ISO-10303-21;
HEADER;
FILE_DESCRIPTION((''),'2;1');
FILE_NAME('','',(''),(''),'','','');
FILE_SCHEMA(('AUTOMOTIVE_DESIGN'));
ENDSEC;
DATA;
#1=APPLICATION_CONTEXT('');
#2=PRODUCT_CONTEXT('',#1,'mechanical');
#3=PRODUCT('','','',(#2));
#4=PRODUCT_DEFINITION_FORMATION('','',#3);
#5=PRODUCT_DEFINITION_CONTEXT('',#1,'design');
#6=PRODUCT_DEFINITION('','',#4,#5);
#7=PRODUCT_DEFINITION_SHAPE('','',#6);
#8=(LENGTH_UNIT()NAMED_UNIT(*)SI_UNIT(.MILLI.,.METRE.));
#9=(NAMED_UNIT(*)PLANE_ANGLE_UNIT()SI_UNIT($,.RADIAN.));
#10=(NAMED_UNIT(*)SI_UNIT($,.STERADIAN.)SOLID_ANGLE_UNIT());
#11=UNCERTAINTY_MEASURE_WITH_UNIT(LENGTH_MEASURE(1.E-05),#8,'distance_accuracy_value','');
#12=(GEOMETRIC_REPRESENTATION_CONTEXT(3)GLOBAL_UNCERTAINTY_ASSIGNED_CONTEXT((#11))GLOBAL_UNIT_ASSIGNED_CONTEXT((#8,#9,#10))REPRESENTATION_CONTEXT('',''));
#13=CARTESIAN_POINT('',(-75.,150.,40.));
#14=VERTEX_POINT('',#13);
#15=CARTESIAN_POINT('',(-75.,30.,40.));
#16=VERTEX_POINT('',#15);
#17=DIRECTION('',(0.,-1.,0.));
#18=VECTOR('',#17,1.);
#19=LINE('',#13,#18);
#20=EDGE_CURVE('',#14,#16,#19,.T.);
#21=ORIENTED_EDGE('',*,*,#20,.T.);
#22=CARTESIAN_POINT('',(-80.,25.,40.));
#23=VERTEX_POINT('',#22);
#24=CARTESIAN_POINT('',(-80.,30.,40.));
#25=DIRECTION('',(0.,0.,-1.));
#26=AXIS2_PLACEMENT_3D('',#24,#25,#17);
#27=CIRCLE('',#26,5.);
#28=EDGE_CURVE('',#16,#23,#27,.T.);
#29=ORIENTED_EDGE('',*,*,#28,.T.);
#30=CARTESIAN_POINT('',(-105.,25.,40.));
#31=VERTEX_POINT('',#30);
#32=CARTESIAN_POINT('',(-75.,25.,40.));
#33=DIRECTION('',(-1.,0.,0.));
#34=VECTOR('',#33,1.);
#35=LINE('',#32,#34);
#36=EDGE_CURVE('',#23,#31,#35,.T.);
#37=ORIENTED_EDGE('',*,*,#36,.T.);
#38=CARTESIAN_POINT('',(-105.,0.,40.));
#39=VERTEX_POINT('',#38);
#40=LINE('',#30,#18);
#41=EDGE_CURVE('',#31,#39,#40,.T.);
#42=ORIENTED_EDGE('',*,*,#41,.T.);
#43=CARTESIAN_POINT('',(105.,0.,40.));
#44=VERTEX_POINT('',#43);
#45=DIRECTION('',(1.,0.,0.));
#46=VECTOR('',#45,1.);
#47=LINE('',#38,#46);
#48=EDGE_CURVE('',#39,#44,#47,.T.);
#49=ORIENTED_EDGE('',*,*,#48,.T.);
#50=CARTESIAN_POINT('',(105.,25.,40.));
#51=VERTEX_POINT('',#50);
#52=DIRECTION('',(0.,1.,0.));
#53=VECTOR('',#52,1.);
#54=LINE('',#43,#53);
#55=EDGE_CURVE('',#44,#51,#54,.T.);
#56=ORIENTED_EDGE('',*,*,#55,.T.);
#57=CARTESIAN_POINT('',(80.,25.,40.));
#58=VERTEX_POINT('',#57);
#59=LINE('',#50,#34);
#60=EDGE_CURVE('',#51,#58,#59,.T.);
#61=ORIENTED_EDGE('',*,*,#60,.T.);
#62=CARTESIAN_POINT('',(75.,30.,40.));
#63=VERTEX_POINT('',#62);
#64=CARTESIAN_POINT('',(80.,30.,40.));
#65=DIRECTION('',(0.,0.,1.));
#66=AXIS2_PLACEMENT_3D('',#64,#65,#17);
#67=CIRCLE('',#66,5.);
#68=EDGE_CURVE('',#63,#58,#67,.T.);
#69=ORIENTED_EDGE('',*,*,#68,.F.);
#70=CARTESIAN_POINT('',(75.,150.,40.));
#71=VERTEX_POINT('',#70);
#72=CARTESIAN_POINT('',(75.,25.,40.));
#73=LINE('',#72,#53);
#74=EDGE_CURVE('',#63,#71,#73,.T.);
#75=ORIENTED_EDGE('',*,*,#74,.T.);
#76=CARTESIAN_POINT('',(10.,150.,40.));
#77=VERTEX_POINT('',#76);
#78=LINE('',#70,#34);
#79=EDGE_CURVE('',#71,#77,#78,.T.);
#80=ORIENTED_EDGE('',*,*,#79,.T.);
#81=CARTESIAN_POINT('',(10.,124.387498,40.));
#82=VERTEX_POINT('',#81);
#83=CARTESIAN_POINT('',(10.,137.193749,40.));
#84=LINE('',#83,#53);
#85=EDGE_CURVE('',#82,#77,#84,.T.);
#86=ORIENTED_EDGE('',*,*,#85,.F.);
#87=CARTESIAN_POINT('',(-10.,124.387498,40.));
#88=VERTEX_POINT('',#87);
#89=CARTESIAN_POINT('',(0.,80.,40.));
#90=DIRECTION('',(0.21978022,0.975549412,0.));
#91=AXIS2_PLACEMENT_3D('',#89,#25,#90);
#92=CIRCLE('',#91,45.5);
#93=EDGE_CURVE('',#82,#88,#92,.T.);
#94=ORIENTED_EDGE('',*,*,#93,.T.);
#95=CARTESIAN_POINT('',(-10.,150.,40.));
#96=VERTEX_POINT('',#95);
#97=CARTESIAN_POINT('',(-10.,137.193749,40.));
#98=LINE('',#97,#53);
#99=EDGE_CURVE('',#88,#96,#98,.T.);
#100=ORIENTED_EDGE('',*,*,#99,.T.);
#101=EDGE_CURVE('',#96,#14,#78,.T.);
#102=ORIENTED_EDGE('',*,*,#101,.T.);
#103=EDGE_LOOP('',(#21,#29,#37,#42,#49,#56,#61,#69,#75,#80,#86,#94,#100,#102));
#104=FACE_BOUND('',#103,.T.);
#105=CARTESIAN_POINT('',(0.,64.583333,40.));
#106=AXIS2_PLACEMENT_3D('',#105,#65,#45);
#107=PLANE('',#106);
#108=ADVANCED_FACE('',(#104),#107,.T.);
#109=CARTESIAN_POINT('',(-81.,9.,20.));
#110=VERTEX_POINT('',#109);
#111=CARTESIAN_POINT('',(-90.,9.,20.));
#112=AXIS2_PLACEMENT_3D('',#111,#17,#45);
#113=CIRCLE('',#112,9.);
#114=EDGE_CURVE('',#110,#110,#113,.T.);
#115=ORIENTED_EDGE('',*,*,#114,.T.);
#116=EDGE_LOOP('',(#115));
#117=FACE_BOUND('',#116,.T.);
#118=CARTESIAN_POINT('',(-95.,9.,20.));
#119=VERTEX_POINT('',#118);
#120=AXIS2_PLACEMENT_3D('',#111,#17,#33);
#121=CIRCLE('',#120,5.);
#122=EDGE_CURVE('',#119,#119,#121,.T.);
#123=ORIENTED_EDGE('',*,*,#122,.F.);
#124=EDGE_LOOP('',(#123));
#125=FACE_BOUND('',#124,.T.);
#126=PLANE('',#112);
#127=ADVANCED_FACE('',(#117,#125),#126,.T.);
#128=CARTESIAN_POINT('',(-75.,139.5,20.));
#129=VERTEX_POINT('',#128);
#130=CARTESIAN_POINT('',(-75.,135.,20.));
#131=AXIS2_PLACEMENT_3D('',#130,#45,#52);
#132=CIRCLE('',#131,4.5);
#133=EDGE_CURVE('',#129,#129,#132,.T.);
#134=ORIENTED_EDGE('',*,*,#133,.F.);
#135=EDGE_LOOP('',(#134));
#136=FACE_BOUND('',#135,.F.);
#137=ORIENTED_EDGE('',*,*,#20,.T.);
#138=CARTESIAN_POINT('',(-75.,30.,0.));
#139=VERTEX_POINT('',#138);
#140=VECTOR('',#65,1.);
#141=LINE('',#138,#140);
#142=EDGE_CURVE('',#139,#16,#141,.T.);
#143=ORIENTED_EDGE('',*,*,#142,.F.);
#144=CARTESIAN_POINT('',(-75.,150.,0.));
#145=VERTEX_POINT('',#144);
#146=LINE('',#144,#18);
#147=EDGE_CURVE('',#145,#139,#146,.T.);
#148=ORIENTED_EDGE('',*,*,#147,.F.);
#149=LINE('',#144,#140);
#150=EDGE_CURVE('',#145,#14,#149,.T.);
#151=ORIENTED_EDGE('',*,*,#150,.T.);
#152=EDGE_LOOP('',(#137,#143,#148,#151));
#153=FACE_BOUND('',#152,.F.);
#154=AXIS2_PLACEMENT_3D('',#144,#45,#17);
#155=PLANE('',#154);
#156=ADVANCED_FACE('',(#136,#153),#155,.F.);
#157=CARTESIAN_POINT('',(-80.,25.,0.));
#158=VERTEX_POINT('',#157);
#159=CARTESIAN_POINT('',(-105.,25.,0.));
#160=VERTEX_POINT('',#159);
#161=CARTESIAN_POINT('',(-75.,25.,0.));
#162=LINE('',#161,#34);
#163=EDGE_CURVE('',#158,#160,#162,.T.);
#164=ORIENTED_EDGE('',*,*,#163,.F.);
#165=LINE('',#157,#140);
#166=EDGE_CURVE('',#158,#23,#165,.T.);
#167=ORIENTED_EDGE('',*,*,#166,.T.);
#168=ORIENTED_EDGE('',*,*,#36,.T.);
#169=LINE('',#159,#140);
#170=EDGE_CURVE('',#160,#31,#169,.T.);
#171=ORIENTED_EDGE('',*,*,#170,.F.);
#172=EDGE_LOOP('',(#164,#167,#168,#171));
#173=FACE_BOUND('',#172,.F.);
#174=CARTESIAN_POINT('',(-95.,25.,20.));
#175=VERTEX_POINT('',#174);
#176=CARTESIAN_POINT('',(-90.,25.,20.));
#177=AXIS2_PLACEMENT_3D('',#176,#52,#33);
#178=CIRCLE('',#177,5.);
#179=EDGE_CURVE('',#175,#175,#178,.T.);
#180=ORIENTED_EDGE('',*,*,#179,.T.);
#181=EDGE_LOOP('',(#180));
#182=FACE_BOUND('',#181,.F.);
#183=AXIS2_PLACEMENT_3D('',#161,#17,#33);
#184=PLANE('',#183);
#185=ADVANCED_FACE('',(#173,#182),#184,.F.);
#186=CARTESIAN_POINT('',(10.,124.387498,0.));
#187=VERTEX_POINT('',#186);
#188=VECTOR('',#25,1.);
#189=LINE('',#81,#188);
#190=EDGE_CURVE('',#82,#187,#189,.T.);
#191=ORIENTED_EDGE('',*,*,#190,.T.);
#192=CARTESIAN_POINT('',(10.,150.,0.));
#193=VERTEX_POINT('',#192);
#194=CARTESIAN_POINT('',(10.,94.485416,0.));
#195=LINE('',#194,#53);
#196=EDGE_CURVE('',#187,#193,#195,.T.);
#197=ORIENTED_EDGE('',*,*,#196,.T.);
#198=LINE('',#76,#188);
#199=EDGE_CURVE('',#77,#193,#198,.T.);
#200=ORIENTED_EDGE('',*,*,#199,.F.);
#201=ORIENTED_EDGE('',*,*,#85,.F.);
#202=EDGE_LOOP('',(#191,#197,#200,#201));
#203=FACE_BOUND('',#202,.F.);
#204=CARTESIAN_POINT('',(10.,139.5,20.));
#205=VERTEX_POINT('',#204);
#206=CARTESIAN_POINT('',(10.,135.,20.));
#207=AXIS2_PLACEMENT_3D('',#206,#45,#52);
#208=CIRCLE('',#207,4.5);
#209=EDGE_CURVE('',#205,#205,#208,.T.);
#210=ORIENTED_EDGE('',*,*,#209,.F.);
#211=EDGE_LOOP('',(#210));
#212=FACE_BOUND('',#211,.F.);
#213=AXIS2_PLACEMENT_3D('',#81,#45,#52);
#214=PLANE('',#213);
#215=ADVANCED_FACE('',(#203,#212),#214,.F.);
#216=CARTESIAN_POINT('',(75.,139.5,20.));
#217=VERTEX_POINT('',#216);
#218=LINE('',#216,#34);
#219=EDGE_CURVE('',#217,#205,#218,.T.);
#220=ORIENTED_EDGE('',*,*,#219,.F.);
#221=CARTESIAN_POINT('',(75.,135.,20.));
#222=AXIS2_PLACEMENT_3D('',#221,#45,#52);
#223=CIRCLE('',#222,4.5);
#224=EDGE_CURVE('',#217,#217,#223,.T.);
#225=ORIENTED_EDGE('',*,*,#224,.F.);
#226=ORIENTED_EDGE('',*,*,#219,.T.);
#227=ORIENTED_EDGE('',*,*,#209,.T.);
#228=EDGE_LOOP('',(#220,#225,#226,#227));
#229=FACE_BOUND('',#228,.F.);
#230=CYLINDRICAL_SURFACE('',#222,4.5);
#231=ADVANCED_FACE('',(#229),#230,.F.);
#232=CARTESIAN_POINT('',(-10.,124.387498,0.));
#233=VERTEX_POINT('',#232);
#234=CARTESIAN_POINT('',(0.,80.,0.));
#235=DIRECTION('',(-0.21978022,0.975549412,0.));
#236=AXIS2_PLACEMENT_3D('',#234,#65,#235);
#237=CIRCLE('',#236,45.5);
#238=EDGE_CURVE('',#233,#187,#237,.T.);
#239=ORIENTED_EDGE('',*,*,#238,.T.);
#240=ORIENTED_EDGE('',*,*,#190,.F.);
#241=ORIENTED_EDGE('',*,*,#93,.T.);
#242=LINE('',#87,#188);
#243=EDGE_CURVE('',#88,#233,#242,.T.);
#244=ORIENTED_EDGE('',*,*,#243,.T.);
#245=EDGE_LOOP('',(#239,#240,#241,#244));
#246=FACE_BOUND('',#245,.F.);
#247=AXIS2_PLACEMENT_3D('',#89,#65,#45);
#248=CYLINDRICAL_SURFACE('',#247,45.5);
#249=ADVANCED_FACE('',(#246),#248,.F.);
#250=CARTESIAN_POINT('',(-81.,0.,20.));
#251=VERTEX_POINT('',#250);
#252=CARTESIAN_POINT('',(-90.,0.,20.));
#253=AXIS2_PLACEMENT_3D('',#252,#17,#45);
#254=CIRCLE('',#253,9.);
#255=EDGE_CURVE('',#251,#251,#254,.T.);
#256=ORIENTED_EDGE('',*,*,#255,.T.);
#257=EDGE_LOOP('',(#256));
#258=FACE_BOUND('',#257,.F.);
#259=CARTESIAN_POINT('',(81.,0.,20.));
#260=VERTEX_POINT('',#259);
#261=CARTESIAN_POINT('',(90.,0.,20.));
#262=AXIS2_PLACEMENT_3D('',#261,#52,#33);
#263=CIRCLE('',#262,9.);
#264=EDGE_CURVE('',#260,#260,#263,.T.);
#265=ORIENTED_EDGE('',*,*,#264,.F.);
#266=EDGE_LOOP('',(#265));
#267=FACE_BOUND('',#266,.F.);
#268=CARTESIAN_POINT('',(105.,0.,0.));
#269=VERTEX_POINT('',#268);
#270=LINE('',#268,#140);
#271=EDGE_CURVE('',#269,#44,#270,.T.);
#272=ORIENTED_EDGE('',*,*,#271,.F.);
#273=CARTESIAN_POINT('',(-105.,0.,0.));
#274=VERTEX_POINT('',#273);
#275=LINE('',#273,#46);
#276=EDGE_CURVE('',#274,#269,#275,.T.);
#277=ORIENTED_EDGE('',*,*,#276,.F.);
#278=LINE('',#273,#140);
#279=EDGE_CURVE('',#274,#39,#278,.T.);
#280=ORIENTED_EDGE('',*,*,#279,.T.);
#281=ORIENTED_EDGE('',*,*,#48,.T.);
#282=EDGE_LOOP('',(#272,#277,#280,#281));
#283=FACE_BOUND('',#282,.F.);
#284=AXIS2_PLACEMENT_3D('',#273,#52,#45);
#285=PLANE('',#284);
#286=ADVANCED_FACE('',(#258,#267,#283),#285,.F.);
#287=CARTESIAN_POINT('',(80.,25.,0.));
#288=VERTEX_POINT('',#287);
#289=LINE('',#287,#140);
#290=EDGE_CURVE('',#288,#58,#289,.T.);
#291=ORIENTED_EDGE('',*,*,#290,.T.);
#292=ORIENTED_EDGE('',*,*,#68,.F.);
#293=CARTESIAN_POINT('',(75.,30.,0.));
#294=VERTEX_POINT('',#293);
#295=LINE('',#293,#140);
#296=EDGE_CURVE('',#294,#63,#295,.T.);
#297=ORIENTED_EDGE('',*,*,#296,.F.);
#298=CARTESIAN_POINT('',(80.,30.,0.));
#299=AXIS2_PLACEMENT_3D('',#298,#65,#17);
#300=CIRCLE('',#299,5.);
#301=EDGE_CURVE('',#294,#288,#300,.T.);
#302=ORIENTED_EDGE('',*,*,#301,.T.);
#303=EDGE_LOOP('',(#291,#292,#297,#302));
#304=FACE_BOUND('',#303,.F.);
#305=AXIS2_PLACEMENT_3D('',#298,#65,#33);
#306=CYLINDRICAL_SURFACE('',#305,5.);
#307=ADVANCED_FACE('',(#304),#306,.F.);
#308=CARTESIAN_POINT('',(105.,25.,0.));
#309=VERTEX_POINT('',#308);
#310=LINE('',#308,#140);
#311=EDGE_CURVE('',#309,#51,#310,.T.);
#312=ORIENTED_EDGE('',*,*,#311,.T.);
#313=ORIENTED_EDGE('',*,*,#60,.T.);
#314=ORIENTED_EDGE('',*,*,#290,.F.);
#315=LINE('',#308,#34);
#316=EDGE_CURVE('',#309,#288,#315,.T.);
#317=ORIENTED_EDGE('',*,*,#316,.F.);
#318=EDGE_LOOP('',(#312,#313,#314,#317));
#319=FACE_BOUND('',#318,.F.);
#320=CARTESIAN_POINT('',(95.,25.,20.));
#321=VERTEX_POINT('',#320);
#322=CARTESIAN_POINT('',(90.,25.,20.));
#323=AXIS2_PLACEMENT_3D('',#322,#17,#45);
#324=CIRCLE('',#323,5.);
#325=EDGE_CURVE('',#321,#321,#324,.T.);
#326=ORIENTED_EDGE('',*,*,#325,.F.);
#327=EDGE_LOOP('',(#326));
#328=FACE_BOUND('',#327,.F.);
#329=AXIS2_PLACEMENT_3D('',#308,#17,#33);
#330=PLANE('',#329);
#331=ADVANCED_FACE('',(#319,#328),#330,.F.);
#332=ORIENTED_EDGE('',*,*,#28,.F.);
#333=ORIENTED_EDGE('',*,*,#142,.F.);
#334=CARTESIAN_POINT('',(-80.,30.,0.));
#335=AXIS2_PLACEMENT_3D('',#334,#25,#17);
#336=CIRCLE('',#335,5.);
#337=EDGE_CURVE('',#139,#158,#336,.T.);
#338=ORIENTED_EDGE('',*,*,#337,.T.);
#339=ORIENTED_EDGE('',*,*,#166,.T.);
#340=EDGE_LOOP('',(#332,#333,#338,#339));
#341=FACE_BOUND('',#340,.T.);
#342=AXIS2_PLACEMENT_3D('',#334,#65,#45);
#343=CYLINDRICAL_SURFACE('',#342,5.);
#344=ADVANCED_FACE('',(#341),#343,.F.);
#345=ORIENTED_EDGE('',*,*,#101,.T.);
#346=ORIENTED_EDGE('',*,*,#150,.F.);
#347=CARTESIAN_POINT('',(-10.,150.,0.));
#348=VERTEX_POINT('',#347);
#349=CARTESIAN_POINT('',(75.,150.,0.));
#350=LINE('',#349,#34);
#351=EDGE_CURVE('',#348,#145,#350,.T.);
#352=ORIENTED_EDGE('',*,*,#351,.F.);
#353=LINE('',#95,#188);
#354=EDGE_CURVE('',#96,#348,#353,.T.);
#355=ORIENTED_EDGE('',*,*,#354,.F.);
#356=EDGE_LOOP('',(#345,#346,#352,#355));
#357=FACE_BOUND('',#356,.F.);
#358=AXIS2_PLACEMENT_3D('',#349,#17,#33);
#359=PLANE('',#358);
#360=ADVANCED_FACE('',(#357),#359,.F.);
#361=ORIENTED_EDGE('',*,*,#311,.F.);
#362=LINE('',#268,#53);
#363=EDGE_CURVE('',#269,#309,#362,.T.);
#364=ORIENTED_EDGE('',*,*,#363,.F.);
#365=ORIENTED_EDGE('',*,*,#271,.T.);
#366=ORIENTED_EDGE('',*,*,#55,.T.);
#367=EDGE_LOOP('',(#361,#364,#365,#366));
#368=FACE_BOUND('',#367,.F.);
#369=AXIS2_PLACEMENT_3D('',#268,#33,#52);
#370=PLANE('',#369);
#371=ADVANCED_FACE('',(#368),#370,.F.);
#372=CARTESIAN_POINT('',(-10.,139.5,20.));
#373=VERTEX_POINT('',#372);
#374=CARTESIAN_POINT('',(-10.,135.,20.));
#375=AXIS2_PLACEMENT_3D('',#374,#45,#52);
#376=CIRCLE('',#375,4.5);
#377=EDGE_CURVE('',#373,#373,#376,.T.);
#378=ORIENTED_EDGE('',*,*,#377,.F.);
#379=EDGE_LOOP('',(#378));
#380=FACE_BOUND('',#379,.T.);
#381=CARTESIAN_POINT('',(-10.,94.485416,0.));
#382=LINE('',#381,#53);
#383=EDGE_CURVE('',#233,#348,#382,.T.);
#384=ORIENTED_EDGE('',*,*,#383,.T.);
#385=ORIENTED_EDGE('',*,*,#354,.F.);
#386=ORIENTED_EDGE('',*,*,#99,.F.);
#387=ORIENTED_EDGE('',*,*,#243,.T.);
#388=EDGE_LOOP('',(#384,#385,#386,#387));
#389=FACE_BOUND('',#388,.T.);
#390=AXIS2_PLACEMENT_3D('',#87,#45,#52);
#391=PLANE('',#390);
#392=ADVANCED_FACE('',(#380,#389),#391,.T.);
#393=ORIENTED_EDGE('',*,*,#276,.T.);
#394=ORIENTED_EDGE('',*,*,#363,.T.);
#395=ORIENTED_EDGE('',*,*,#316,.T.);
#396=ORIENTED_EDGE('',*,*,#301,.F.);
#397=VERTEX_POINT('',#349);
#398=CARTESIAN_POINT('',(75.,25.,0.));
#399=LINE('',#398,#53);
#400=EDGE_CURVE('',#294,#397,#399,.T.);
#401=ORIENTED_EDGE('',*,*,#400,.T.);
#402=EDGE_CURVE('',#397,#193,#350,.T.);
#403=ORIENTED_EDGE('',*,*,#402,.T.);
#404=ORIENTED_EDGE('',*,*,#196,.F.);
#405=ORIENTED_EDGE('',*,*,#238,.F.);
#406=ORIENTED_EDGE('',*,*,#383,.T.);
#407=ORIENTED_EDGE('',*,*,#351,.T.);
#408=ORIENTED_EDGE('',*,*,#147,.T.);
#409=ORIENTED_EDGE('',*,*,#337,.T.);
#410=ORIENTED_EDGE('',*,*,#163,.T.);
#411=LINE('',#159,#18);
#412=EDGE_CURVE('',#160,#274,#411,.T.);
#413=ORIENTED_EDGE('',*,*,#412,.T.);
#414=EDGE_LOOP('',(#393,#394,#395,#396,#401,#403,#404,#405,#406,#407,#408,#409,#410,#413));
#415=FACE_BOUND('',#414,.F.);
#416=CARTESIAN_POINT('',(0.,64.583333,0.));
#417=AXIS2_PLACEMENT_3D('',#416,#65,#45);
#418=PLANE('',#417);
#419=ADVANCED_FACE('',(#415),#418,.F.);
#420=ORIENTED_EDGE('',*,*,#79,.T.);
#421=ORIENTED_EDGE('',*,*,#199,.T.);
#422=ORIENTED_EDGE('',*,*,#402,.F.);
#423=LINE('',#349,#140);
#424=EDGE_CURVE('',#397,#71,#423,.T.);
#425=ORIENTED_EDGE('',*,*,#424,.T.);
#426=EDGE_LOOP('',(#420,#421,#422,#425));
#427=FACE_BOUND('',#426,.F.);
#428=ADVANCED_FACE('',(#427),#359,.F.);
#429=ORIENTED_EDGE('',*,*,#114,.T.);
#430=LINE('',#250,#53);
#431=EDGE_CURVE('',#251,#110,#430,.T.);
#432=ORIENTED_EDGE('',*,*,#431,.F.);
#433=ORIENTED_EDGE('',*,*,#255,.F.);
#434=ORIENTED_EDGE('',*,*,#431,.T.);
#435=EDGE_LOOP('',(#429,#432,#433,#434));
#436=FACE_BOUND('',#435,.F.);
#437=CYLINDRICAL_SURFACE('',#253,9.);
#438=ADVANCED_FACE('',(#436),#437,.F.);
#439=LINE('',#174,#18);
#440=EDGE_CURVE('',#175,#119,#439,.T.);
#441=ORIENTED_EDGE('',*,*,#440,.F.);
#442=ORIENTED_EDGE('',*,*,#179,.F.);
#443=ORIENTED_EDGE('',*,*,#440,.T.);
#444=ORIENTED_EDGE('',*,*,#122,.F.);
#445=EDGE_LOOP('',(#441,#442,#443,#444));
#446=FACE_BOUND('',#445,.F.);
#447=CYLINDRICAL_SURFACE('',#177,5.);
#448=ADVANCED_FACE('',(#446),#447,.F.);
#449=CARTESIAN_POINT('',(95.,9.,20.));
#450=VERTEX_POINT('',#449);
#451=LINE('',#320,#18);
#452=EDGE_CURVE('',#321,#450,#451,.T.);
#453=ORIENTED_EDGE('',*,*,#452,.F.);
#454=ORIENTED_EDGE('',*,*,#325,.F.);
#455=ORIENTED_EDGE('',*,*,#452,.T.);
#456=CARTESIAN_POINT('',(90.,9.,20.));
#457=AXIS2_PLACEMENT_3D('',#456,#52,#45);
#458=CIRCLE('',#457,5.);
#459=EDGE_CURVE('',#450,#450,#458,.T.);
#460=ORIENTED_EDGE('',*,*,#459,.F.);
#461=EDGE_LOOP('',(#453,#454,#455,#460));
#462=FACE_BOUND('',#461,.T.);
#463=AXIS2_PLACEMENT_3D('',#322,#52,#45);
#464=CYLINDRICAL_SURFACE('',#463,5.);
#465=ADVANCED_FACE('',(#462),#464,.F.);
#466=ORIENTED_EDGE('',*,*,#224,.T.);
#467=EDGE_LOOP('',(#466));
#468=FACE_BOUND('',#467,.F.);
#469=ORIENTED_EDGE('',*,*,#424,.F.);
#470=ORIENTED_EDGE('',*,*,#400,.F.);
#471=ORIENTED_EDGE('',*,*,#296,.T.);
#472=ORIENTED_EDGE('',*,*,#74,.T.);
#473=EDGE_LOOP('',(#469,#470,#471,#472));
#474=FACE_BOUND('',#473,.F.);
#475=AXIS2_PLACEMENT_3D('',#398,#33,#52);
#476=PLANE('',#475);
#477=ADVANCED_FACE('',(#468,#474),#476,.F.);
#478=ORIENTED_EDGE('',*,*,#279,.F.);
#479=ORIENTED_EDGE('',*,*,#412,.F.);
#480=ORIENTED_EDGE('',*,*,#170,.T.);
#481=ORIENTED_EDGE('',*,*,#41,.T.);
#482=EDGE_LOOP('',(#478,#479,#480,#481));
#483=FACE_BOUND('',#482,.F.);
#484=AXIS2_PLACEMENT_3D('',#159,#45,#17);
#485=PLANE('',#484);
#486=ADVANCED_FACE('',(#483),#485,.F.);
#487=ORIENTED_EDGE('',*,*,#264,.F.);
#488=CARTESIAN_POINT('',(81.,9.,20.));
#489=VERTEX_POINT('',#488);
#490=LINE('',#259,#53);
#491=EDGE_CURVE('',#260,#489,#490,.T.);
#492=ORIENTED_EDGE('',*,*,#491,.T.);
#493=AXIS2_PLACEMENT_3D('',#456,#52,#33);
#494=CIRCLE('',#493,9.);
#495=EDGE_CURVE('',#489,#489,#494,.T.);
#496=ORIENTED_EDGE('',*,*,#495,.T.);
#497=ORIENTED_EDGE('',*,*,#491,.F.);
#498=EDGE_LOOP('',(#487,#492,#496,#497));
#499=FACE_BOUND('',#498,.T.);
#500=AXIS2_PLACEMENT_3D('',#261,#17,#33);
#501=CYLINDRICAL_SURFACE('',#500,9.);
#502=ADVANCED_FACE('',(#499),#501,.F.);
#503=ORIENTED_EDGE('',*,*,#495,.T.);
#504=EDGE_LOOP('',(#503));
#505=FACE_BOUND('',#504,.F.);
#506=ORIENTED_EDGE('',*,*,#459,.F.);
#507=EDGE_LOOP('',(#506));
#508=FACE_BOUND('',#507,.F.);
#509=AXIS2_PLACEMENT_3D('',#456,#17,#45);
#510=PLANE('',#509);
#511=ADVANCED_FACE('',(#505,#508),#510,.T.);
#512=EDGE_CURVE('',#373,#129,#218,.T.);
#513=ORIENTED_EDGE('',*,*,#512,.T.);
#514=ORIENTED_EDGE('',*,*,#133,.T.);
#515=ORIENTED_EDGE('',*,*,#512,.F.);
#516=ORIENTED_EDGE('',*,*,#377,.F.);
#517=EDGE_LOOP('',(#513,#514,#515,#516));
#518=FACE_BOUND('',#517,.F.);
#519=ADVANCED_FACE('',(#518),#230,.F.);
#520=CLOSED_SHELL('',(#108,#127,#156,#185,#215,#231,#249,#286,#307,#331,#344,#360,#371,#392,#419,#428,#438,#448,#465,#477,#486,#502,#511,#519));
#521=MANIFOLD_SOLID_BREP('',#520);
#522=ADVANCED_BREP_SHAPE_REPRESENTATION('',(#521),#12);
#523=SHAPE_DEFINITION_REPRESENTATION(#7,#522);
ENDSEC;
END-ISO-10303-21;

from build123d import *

# Parameters (mm, degrees)
F1_DEPTH  = 40
F2_R      = 45.5
F3_DEPTH  = 40.001
F4_W      = 20
F4_H      = 25.6125017601
F5_DEPTH  = 40.001
F6_R      = 4.5
F7_DEPTH  = 180.001
F8_R      = 5
F9_DEPTH  = 25.001
F10_R     = 9
F10_R_2   = 5
F11_DEPTH = 9
F12_R     = 5


# Not quite as in the source:
# - a pattern or mirror of a feature is missing from the dataset's text; its kind, count and spacing are read off the source's solid


with BuildPart() as f1:
    # F0 (on Top) → F1 (new body)
    with BuildSketch(Plane.XY):
        Polygon((-105, 25), (-105, 0), (105, 0), (105, 25), (75, 25), (75, 150), (-75, 150), (-75, 25), align=None)
    extrude(amount=F1_DEPTH)

    # F2 (on face) → F3 (cut, through all)
    with BuildSketch(Plane.XY.offset(40)):
        with Locations((0, 80)):
            Circle(F2_R)
    extrude(amount=-F3_DEPTH, mode=Mode.SUBTRACT)

    # F4 (on face) → F5 (cut, through all)
    with BuildSketch(Plane.XY.offset(40)):
        with Locations((0, 137.19374912)):
            Rectangle(F4_W, F4_H)
    extrude(amount=-F5_DEPTH, mode=Mode.SUBTRACT)

    # F6 (on face) → F7 (cut, through all)
    with BuildSketch(Plane.YZ.offset(75)):
        with Locations((135, 20)):
            Circle(F6_R)
    extrude(amount=-F7_DEPTH, mode=Mode.SUBTRACT)

    # F8 (on face) → F9 (cut, through all)
    with BuildSketch(Plane(origin=(0, 25, 0), x_dir=(-1, 0, 0), z_dir=(0, 1, 0))):
        with Locations((90, 20)):
            Circle(F8_R)
    f9 = extrude(amount=-F9_DEPTH, mode=Mode.SUBTRACT)

    # F9_copies: F9 across plane
    add(f9.mirror(Plane(origin=(0, 0, 0), x_dir=(0, 0, 1), z_dir=(1, 0, 0))), mode=Mode.SUBTRACT)

    # F10 (on face) → F11 (cut)
    with BuildSketch(Plane.XZ):
        with Locations((-90, 20)):
            Circle(F10_R)
        with Locations((-90, 20)):
            Circle(F10_R_2, mode=Mode.SUBTRACT)
    f11 = extrude(amount=-F11_DEPTH, mode=Mode.SUBTRACT)

    # F11_copies: F11 across plane
    add(f11.mirror(Plane(origin=(0, 0, 0), x_dir=(0, 0, 1), z_dir=(1, 0, 0))), mode=Mode.SUBTRACT)

    # F12
    f12_edges = [f1.edges().sort_by_distance(p)[0] for p in [
        (-75, 25, 20),
        (75, 25, 20),
    ]]
    fillet(f12_edges, radius=F12_R)


solid = f1.part
